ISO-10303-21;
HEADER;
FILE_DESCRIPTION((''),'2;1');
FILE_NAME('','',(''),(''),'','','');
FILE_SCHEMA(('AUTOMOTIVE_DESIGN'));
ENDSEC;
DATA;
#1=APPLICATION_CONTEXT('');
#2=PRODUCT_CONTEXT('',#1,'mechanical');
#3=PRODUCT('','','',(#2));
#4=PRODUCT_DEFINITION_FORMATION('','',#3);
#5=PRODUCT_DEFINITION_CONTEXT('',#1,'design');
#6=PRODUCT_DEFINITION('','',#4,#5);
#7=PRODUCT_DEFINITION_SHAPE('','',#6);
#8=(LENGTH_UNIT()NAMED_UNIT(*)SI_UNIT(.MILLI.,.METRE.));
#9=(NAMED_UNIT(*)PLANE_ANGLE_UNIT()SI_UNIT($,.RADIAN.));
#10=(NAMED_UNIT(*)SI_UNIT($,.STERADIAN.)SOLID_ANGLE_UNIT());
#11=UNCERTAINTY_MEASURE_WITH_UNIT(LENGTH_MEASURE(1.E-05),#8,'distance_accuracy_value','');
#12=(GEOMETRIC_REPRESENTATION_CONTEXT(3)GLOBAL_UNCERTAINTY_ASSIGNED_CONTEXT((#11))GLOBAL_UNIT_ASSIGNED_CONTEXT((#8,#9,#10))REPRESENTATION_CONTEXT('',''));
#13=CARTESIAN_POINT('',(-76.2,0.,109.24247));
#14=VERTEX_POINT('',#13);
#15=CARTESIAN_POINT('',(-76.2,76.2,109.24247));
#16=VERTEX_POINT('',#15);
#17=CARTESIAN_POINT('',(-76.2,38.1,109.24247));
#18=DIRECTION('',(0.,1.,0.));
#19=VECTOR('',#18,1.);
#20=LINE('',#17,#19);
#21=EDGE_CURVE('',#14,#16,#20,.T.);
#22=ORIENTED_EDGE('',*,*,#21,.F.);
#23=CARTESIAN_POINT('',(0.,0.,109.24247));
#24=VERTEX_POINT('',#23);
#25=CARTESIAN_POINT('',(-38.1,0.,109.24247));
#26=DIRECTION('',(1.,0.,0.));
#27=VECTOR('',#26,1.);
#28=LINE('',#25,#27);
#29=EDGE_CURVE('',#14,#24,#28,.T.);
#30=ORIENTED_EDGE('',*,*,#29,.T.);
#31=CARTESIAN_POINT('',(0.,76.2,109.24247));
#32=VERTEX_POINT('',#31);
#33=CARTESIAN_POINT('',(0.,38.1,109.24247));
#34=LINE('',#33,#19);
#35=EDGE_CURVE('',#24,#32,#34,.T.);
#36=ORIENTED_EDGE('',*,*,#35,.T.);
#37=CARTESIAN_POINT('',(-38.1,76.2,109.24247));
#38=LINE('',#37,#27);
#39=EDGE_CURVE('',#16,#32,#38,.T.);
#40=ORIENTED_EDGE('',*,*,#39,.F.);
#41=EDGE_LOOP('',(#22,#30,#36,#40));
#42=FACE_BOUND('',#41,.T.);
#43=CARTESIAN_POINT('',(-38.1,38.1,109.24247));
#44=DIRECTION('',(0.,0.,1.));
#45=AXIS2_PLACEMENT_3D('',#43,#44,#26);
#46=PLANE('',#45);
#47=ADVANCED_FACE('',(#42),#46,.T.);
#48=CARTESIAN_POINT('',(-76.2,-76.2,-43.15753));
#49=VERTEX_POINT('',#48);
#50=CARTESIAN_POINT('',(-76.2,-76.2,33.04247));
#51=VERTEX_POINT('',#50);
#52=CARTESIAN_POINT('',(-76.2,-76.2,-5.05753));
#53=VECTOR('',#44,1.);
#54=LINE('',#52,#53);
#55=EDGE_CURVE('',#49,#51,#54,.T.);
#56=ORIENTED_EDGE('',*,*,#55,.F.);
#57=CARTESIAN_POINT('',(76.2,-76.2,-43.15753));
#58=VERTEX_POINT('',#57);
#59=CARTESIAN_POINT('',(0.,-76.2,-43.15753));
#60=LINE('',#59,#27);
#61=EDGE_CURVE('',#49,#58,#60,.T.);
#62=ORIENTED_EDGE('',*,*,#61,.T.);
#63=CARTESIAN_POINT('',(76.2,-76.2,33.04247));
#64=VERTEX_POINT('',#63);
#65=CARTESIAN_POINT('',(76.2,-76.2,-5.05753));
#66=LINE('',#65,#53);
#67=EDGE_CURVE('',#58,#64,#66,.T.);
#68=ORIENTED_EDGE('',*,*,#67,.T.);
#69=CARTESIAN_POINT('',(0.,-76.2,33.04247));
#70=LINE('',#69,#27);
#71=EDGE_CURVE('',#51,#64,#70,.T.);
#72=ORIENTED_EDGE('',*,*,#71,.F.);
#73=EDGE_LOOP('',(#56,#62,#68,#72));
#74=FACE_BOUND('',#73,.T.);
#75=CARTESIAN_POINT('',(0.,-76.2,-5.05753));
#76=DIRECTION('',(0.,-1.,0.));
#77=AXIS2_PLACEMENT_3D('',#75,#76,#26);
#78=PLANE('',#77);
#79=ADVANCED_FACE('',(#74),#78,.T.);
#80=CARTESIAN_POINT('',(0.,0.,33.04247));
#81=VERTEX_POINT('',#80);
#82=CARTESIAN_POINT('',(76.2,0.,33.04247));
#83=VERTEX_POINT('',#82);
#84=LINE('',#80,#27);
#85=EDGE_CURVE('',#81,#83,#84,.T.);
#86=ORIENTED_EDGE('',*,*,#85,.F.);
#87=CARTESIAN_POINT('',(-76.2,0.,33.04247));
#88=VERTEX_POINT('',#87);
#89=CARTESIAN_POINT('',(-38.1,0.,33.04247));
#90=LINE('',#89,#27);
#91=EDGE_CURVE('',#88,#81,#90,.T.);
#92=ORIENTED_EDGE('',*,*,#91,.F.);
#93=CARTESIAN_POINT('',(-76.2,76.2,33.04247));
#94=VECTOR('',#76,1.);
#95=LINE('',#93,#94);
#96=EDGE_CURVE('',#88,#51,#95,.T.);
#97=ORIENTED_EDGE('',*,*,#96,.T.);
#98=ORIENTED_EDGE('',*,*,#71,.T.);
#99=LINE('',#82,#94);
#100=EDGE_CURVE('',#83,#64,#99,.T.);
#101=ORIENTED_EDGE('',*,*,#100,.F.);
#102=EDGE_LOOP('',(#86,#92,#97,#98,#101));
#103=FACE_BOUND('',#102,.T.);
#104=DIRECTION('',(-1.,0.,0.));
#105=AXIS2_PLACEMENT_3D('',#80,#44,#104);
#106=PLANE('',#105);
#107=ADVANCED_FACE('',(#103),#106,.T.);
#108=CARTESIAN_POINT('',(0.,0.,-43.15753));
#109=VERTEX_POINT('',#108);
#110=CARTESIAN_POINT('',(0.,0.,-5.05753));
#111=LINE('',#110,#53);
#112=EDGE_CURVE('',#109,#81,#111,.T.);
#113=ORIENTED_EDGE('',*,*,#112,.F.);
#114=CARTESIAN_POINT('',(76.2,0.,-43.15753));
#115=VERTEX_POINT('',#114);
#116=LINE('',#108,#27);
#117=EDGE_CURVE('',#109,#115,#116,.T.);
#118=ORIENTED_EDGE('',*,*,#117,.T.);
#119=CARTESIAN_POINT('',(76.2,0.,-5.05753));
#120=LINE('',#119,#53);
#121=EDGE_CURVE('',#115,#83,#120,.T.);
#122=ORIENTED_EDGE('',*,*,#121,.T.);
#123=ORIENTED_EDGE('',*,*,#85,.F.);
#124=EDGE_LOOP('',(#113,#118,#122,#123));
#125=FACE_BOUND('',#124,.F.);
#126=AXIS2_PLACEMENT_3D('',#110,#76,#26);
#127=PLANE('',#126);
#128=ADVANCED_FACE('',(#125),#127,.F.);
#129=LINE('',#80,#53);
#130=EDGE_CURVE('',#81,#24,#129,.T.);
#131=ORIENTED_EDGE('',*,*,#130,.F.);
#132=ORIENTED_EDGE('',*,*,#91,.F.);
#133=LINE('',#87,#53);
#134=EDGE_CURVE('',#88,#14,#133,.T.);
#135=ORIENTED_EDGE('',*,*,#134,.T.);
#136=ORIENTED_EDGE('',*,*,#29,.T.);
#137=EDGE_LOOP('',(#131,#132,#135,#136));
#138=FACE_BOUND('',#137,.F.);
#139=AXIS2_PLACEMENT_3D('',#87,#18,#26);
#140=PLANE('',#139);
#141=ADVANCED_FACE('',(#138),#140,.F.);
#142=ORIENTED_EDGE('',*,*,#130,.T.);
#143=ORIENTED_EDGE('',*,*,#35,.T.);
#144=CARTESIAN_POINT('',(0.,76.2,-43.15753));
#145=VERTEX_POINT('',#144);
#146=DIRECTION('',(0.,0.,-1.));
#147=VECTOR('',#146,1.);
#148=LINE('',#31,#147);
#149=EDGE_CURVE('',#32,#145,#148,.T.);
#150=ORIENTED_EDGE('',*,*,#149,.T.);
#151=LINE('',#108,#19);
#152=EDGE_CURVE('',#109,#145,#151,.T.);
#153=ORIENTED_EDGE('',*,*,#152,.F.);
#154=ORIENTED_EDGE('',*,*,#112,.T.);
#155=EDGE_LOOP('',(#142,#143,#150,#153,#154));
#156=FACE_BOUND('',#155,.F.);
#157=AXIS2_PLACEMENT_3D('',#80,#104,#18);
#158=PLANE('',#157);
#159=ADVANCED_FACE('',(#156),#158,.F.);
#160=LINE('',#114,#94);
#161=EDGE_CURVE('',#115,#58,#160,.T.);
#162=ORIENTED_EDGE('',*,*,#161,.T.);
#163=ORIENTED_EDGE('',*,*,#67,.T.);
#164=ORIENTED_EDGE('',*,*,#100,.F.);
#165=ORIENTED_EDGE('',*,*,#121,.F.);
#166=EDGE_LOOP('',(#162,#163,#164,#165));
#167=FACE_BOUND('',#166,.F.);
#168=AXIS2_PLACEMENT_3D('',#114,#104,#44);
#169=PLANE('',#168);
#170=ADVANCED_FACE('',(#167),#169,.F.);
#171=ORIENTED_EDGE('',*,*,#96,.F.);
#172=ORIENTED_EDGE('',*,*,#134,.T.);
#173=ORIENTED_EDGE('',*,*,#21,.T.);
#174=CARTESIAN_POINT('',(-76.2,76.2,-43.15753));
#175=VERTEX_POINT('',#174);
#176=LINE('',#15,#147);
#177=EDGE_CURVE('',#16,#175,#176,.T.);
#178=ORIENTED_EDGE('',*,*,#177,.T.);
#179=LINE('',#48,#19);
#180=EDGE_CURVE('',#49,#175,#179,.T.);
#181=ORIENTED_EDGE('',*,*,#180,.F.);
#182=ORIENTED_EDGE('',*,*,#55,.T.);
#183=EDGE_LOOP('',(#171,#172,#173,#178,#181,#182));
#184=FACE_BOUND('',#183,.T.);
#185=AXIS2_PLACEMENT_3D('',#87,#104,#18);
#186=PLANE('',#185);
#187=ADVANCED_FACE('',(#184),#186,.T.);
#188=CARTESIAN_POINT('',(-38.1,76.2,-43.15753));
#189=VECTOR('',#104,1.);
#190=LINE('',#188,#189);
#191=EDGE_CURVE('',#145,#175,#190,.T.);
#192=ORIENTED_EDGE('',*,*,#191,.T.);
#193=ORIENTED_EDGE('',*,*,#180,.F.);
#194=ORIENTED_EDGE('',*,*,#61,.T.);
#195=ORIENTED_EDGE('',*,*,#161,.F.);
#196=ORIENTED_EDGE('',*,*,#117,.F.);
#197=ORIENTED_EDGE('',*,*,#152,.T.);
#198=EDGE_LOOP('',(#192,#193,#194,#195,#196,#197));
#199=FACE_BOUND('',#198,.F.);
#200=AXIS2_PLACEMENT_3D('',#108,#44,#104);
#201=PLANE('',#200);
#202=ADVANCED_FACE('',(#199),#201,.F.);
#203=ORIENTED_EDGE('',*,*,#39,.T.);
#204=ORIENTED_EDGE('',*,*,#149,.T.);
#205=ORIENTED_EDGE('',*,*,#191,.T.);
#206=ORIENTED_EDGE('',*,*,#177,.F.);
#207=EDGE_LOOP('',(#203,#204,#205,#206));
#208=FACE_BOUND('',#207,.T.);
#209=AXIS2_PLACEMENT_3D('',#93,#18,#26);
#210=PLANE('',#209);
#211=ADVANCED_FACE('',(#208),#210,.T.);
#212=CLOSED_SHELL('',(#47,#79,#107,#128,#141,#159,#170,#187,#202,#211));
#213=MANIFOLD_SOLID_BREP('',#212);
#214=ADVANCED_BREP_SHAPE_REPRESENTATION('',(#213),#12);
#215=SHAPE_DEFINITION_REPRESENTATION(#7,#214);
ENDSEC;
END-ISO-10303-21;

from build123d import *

# Parameters (mm, degrees)
F1_W     = 152.4
F1_H     = 76.2
F2_DEPTH = 76.2
F3_W     = 76.2
F3_H     = 76.2
F4_DEPTH = 76.2
F5_W     = 76.2
F5_H     = 76.2
F6_DEPTH = 76.2


# Not quite as in the source:
# - a variable given as a bare number and used for a length is read in inches; the dataset says mm whatever the document's units were


with BuildPart() as f2:
    # F1 (on Front) → F2 (new body)
    with BuildSketch(Plane.XZ):
        with Locations((0, -5.0575301152)):
            Rectangle(F1_W, F1_H)
    extrude(amount=F2_DEPTH)

    # F3 (on face) → F4 (join)
    with BuildSketch(Plane(origin=(0, 0, 0), x_dir=(-1, 0, 0), z_dir=(0, 1, 0))):
        with Locations((38.1, -5.0575301152)):
            Rectangle(F3_W, F3_H)
    extrude(amount=F4_DEPTH)

    # F5 (on face) → F6 (join)
    with BuildSketch(Plane.XY.offset(33.0424698848)):
        with Locations((-38.1, 38.1)):
            Rectangle(F5_W, F5_H)
    extrude(amount=F6_DEPTH)


solid = f2.part
